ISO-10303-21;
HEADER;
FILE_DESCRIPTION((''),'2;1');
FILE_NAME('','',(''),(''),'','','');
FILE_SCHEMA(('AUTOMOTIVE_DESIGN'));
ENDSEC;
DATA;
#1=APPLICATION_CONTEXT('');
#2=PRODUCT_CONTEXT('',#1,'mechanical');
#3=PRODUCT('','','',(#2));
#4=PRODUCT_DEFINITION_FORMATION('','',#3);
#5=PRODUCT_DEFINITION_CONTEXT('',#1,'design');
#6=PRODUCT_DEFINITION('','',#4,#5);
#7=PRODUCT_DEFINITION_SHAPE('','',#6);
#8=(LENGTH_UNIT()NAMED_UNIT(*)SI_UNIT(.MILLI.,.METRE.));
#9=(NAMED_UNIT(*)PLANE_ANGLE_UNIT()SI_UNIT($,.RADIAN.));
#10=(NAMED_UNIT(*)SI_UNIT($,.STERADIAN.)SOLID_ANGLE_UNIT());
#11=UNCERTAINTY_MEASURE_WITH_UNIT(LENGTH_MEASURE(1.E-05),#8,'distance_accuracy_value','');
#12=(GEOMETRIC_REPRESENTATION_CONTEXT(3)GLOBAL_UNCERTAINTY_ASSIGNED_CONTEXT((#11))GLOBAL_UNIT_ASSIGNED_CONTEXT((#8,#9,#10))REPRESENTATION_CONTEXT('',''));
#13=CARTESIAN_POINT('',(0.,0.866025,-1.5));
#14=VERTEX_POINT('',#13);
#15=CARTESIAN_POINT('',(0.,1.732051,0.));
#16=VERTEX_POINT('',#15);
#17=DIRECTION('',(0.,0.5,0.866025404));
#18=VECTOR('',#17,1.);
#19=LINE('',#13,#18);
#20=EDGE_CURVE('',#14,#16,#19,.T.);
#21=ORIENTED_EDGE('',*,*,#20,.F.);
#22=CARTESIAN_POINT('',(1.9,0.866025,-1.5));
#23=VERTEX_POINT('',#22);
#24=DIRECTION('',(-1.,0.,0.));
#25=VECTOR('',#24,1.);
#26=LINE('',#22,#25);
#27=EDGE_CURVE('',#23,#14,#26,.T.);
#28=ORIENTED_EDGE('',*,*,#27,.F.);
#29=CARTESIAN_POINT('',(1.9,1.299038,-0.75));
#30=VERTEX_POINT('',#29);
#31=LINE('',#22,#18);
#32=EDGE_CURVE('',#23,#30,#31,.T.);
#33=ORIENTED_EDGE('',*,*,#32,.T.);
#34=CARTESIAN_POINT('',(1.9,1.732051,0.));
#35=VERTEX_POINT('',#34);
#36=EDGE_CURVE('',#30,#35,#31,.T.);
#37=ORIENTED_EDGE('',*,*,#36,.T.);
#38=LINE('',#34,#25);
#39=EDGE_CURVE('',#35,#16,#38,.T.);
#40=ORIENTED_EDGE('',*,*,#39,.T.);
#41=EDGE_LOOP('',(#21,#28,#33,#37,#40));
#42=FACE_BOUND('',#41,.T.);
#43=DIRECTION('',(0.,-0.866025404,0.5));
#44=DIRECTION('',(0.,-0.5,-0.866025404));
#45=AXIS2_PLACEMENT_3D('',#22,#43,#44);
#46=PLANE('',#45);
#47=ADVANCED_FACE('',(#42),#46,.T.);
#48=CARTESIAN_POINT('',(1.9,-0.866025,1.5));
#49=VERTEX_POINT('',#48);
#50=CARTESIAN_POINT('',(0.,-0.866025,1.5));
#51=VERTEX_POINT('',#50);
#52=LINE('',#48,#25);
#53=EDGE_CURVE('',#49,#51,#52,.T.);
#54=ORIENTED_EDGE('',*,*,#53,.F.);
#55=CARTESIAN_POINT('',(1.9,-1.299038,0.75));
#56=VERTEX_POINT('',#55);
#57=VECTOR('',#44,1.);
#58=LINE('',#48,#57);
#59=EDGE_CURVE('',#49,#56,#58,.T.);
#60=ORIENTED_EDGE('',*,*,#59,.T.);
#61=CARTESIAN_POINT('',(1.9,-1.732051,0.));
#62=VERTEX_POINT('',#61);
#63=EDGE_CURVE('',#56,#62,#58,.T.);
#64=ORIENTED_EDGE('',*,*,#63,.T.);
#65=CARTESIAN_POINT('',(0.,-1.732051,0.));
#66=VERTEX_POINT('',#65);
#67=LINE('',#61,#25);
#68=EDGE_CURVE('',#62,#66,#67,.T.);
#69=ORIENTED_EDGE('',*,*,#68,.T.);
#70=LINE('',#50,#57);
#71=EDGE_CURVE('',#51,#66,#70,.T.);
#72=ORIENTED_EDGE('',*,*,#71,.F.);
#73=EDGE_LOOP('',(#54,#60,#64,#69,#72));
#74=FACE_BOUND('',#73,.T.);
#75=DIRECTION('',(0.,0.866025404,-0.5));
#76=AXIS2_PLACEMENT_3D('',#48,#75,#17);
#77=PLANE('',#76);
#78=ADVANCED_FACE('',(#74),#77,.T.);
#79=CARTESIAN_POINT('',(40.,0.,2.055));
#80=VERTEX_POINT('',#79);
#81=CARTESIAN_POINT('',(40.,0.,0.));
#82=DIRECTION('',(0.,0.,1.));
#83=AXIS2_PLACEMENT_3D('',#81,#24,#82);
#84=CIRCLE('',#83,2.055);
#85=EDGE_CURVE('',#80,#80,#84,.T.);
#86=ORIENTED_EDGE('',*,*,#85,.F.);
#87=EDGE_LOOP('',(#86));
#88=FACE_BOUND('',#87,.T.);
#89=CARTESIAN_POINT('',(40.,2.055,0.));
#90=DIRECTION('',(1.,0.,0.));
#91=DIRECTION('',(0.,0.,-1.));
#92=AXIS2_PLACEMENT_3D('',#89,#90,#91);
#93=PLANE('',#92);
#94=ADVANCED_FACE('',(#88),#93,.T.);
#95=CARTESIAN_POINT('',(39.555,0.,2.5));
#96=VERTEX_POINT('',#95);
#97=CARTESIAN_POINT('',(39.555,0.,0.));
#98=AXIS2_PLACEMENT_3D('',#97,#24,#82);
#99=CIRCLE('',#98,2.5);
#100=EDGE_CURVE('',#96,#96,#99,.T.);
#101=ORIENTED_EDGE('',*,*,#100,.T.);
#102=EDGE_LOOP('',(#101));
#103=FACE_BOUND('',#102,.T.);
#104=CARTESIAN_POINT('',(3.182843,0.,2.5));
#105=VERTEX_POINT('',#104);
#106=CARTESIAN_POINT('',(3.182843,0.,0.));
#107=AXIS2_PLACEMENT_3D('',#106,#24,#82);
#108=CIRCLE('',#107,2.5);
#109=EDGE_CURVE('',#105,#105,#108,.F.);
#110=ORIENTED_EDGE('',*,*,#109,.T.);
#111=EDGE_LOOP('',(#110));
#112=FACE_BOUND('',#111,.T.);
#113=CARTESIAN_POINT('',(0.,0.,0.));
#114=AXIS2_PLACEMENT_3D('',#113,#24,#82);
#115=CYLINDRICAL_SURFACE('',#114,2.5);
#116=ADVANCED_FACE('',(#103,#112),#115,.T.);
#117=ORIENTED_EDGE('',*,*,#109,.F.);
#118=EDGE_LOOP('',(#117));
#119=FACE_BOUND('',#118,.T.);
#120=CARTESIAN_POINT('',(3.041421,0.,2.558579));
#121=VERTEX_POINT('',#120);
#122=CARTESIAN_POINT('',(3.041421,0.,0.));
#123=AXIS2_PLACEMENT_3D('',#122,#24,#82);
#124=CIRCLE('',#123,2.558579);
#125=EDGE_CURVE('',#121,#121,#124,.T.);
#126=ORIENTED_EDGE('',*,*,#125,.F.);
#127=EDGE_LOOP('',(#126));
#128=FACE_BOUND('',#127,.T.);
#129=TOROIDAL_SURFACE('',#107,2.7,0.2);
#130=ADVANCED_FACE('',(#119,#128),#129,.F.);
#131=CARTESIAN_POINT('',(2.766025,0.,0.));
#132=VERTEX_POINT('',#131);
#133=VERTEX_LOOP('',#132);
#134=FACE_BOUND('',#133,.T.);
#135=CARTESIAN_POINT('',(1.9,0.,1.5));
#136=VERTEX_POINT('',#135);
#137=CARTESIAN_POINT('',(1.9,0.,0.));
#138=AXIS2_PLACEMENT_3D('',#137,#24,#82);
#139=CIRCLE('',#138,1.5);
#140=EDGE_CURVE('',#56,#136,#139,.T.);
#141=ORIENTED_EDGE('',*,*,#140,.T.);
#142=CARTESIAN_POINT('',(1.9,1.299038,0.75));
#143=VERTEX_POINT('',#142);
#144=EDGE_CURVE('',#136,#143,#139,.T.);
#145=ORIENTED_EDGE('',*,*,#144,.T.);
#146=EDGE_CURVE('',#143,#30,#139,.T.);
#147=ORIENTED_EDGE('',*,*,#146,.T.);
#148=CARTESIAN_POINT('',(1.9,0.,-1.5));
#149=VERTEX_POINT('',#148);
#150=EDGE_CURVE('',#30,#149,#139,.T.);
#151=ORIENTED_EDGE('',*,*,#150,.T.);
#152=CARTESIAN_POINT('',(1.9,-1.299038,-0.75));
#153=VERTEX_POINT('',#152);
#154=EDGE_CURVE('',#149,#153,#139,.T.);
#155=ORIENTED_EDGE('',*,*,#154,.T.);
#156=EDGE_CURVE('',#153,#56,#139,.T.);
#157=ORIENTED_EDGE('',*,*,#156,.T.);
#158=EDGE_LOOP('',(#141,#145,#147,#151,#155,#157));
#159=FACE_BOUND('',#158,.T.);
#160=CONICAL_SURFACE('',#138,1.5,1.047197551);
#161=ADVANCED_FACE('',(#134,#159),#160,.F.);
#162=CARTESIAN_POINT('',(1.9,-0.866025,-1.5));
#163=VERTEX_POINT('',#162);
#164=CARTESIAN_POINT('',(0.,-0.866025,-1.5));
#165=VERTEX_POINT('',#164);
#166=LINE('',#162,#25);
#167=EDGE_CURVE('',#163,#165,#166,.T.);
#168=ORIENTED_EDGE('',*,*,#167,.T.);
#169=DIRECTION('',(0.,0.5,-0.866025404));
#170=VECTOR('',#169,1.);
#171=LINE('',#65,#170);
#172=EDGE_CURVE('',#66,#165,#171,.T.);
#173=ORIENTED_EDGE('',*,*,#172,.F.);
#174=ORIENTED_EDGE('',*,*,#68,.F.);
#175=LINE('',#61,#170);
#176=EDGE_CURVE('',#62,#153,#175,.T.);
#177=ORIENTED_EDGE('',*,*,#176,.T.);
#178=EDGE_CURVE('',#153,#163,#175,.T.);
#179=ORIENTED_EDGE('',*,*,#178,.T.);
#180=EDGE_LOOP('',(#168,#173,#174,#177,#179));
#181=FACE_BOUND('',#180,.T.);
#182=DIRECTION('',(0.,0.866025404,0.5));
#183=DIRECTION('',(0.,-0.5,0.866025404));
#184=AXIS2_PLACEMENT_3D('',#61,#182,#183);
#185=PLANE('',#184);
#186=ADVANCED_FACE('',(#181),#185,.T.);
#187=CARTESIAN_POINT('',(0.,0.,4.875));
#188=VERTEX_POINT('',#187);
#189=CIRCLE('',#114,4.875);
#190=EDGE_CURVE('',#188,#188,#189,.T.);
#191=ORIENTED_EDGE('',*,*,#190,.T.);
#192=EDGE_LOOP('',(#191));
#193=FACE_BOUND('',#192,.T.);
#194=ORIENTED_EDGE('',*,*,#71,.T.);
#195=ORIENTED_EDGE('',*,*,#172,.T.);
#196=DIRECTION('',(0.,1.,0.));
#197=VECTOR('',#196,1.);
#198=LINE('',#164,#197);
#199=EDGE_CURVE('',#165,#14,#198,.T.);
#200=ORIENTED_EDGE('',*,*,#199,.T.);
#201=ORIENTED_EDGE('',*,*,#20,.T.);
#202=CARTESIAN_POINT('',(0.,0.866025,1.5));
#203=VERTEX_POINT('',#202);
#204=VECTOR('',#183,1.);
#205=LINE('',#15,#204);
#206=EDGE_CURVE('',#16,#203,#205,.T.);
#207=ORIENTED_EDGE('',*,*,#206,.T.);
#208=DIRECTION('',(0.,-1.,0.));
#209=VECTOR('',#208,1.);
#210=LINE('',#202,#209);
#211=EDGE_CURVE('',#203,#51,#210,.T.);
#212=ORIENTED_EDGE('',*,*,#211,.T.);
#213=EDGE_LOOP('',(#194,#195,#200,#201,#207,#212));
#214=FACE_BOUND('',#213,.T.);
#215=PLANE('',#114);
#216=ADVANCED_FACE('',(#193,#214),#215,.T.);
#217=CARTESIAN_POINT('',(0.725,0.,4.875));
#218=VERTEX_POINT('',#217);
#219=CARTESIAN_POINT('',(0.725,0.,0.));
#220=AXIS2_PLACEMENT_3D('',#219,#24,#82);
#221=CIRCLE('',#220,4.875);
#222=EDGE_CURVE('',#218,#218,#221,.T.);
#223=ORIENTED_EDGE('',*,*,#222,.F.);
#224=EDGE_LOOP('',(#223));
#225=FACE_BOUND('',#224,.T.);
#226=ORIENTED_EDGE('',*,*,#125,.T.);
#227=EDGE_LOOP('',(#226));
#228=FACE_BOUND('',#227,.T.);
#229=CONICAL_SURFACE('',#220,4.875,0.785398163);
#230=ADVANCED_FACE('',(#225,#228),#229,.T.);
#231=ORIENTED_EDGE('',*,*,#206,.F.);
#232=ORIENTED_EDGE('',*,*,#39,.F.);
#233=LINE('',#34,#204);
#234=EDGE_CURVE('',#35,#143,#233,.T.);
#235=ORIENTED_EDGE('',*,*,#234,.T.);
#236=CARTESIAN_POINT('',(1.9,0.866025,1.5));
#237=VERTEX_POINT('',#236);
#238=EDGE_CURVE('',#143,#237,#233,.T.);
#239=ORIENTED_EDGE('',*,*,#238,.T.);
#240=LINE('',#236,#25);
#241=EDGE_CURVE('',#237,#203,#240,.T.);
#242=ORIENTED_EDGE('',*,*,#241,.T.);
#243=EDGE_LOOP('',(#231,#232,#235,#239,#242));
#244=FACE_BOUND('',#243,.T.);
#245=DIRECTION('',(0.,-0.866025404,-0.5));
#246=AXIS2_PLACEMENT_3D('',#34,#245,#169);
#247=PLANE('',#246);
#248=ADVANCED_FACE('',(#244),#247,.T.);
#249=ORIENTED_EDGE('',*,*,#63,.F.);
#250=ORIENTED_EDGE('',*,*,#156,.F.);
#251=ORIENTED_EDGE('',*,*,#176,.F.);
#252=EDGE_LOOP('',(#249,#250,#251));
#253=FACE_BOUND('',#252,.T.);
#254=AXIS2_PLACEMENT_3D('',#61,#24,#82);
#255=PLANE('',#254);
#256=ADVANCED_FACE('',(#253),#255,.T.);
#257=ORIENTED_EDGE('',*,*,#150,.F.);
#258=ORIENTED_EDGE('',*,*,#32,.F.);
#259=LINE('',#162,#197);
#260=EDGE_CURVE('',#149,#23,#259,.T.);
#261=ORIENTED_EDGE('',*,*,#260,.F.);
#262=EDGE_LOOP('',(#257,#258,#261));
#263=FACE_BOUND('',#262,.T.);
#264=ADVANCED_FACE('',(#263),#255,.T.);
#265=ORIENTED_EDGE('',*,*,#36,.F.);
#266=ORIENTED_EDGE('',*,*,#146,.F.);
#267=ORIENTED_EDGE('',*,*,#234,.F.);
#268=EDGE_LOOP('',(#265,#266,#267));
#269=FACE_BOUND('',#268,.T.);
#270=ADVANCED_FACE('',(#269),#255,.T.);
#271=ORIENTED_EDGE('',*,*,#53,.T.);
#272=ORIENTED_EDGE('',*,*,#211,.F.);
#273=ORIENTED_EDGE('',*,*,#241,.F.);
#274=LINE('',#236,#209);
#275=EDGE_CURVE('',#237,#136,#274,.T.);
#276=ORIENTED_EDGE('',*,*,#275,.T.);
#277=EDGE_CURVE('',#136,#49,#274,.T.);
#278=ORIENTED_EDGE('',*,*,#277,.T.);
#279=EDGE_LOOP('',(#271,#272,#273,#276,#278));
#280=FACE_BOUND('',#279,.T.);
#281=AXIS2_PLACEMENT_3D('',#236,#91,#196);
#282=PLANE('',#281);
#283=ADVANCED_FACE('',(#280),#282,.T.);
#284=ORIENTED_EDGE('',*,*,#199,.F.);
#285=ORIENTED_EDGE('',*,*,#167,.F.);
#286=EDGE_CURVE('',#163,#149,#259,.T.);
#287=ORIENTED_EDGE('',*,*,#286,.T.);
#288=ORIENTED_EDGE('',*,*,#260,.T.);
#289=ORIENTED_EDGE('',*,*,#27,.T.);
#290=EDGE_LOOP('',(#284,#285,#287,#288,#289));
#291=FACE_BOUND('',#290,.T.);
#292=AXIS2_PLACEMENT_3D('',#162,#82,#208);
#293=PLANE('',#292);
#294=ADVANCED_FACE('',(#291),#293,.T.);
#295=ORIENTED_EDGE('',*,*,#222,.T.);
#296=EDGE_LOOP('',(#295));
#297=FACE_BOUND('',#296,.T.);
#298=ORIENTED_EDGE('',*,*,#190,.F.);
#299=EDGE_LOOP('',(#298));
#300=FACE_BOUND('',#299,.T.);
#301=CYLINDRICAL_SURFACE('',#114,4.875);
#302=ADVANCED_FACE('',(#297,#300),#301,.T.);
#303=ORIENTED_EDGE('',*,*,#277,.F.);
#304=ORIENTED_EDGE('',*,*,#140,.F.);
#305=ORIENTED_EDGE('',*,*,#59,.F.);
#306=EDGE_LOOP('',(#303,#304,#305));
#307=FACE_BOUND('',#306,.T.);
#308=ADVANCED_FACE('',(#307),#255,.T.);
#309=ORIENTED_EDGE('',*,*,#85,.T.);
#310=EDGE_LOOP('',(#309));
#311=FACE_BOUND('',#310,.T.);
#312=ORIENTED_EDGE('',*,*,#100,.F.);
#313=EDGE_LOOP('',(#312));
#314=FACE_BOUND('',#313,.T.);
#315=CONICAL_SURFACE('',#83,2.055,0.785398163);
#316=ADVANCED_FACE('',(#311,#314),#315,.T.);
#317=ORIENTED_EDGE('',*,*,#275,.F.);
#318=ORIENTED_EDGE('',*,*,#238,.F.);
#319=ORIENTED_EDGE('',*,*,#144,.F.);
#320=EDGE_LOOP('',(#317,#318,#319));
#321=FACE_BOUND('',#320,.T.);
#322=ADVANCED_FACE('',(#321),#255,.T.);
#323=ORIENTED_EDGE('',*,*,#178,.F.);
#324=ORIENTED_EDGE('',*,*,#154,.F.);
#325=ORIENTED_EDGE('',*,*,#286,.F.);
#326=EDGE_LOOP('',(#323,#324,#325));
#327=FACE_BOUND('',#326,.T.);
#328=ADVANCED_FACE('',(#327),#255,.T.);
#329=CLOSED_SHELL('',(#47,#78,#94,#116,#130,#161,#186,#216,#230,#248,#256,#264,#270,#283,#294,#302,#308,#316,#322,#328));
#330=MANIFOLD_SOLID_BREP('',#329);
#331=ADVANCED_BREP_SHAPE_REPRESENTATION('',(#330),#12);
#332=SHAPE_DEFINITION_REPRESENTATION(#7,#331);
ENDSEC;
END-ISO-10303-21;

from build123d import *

# Parameters (mm, degrees)
FILLET1_R   = 0.2
HEX_START   = -1.9
HEX_2_DEPTH = 1.9


with BuildPart() as part:
    # BodySke → BaseBody (revolve)
    with BuildSketch(Plane.XY, mode=Mode.PRIVATE) as basebody_sk:
        Polygon((0, 0), (0, 4.875), (0.725, 4.875), (3.1, 2.5), (39.555, 2.5), (40, 2.055), (40, 0), align=None)
    revolve(basebody_sk.sketch.rotate(Axis((0, 0, 0), (1, 0, 0)), 90), axis=Axis((0, 0, 0), (1, 0, 0)))

    # Fillet1
    fillet1_edges = [part.edges().sort_by_distance(p)[0] for p in [
        (3.1, 0, -2.5),
    ]]
    fillet(fillet1_edges, radius=FILLET1_R)

    # Hex 2: read off the stored shape, not the designer's step
    # Hex 2 outline → Hex 2 (cut)
    with BuildSketch(Plane.ZY.offset(HEX_START)):
        Polygon((-1.5, -0.866025404), (0, -1.732050808), (1.5, -0.866025404), (1.5, 0.866025404), (0, 1.732050808), (-1.5, 0.866025404), align=None)
    extrude(amount=HEX_2_DEPTH, mode=Mode.SUBTRACT)

    # Hex 2 2 outline → Hex 2 2 (revolve, cut)
    with BuildSketch(Plane.YX):
        Polygon((1.5, 1.9), (0, 2.766025404), (0, 1.9), align=None)
    revolve(axis=Axis((0, 0, 0), (1, 0, 0)), mode=Mode.SUBTRACT)


solid = part.part
